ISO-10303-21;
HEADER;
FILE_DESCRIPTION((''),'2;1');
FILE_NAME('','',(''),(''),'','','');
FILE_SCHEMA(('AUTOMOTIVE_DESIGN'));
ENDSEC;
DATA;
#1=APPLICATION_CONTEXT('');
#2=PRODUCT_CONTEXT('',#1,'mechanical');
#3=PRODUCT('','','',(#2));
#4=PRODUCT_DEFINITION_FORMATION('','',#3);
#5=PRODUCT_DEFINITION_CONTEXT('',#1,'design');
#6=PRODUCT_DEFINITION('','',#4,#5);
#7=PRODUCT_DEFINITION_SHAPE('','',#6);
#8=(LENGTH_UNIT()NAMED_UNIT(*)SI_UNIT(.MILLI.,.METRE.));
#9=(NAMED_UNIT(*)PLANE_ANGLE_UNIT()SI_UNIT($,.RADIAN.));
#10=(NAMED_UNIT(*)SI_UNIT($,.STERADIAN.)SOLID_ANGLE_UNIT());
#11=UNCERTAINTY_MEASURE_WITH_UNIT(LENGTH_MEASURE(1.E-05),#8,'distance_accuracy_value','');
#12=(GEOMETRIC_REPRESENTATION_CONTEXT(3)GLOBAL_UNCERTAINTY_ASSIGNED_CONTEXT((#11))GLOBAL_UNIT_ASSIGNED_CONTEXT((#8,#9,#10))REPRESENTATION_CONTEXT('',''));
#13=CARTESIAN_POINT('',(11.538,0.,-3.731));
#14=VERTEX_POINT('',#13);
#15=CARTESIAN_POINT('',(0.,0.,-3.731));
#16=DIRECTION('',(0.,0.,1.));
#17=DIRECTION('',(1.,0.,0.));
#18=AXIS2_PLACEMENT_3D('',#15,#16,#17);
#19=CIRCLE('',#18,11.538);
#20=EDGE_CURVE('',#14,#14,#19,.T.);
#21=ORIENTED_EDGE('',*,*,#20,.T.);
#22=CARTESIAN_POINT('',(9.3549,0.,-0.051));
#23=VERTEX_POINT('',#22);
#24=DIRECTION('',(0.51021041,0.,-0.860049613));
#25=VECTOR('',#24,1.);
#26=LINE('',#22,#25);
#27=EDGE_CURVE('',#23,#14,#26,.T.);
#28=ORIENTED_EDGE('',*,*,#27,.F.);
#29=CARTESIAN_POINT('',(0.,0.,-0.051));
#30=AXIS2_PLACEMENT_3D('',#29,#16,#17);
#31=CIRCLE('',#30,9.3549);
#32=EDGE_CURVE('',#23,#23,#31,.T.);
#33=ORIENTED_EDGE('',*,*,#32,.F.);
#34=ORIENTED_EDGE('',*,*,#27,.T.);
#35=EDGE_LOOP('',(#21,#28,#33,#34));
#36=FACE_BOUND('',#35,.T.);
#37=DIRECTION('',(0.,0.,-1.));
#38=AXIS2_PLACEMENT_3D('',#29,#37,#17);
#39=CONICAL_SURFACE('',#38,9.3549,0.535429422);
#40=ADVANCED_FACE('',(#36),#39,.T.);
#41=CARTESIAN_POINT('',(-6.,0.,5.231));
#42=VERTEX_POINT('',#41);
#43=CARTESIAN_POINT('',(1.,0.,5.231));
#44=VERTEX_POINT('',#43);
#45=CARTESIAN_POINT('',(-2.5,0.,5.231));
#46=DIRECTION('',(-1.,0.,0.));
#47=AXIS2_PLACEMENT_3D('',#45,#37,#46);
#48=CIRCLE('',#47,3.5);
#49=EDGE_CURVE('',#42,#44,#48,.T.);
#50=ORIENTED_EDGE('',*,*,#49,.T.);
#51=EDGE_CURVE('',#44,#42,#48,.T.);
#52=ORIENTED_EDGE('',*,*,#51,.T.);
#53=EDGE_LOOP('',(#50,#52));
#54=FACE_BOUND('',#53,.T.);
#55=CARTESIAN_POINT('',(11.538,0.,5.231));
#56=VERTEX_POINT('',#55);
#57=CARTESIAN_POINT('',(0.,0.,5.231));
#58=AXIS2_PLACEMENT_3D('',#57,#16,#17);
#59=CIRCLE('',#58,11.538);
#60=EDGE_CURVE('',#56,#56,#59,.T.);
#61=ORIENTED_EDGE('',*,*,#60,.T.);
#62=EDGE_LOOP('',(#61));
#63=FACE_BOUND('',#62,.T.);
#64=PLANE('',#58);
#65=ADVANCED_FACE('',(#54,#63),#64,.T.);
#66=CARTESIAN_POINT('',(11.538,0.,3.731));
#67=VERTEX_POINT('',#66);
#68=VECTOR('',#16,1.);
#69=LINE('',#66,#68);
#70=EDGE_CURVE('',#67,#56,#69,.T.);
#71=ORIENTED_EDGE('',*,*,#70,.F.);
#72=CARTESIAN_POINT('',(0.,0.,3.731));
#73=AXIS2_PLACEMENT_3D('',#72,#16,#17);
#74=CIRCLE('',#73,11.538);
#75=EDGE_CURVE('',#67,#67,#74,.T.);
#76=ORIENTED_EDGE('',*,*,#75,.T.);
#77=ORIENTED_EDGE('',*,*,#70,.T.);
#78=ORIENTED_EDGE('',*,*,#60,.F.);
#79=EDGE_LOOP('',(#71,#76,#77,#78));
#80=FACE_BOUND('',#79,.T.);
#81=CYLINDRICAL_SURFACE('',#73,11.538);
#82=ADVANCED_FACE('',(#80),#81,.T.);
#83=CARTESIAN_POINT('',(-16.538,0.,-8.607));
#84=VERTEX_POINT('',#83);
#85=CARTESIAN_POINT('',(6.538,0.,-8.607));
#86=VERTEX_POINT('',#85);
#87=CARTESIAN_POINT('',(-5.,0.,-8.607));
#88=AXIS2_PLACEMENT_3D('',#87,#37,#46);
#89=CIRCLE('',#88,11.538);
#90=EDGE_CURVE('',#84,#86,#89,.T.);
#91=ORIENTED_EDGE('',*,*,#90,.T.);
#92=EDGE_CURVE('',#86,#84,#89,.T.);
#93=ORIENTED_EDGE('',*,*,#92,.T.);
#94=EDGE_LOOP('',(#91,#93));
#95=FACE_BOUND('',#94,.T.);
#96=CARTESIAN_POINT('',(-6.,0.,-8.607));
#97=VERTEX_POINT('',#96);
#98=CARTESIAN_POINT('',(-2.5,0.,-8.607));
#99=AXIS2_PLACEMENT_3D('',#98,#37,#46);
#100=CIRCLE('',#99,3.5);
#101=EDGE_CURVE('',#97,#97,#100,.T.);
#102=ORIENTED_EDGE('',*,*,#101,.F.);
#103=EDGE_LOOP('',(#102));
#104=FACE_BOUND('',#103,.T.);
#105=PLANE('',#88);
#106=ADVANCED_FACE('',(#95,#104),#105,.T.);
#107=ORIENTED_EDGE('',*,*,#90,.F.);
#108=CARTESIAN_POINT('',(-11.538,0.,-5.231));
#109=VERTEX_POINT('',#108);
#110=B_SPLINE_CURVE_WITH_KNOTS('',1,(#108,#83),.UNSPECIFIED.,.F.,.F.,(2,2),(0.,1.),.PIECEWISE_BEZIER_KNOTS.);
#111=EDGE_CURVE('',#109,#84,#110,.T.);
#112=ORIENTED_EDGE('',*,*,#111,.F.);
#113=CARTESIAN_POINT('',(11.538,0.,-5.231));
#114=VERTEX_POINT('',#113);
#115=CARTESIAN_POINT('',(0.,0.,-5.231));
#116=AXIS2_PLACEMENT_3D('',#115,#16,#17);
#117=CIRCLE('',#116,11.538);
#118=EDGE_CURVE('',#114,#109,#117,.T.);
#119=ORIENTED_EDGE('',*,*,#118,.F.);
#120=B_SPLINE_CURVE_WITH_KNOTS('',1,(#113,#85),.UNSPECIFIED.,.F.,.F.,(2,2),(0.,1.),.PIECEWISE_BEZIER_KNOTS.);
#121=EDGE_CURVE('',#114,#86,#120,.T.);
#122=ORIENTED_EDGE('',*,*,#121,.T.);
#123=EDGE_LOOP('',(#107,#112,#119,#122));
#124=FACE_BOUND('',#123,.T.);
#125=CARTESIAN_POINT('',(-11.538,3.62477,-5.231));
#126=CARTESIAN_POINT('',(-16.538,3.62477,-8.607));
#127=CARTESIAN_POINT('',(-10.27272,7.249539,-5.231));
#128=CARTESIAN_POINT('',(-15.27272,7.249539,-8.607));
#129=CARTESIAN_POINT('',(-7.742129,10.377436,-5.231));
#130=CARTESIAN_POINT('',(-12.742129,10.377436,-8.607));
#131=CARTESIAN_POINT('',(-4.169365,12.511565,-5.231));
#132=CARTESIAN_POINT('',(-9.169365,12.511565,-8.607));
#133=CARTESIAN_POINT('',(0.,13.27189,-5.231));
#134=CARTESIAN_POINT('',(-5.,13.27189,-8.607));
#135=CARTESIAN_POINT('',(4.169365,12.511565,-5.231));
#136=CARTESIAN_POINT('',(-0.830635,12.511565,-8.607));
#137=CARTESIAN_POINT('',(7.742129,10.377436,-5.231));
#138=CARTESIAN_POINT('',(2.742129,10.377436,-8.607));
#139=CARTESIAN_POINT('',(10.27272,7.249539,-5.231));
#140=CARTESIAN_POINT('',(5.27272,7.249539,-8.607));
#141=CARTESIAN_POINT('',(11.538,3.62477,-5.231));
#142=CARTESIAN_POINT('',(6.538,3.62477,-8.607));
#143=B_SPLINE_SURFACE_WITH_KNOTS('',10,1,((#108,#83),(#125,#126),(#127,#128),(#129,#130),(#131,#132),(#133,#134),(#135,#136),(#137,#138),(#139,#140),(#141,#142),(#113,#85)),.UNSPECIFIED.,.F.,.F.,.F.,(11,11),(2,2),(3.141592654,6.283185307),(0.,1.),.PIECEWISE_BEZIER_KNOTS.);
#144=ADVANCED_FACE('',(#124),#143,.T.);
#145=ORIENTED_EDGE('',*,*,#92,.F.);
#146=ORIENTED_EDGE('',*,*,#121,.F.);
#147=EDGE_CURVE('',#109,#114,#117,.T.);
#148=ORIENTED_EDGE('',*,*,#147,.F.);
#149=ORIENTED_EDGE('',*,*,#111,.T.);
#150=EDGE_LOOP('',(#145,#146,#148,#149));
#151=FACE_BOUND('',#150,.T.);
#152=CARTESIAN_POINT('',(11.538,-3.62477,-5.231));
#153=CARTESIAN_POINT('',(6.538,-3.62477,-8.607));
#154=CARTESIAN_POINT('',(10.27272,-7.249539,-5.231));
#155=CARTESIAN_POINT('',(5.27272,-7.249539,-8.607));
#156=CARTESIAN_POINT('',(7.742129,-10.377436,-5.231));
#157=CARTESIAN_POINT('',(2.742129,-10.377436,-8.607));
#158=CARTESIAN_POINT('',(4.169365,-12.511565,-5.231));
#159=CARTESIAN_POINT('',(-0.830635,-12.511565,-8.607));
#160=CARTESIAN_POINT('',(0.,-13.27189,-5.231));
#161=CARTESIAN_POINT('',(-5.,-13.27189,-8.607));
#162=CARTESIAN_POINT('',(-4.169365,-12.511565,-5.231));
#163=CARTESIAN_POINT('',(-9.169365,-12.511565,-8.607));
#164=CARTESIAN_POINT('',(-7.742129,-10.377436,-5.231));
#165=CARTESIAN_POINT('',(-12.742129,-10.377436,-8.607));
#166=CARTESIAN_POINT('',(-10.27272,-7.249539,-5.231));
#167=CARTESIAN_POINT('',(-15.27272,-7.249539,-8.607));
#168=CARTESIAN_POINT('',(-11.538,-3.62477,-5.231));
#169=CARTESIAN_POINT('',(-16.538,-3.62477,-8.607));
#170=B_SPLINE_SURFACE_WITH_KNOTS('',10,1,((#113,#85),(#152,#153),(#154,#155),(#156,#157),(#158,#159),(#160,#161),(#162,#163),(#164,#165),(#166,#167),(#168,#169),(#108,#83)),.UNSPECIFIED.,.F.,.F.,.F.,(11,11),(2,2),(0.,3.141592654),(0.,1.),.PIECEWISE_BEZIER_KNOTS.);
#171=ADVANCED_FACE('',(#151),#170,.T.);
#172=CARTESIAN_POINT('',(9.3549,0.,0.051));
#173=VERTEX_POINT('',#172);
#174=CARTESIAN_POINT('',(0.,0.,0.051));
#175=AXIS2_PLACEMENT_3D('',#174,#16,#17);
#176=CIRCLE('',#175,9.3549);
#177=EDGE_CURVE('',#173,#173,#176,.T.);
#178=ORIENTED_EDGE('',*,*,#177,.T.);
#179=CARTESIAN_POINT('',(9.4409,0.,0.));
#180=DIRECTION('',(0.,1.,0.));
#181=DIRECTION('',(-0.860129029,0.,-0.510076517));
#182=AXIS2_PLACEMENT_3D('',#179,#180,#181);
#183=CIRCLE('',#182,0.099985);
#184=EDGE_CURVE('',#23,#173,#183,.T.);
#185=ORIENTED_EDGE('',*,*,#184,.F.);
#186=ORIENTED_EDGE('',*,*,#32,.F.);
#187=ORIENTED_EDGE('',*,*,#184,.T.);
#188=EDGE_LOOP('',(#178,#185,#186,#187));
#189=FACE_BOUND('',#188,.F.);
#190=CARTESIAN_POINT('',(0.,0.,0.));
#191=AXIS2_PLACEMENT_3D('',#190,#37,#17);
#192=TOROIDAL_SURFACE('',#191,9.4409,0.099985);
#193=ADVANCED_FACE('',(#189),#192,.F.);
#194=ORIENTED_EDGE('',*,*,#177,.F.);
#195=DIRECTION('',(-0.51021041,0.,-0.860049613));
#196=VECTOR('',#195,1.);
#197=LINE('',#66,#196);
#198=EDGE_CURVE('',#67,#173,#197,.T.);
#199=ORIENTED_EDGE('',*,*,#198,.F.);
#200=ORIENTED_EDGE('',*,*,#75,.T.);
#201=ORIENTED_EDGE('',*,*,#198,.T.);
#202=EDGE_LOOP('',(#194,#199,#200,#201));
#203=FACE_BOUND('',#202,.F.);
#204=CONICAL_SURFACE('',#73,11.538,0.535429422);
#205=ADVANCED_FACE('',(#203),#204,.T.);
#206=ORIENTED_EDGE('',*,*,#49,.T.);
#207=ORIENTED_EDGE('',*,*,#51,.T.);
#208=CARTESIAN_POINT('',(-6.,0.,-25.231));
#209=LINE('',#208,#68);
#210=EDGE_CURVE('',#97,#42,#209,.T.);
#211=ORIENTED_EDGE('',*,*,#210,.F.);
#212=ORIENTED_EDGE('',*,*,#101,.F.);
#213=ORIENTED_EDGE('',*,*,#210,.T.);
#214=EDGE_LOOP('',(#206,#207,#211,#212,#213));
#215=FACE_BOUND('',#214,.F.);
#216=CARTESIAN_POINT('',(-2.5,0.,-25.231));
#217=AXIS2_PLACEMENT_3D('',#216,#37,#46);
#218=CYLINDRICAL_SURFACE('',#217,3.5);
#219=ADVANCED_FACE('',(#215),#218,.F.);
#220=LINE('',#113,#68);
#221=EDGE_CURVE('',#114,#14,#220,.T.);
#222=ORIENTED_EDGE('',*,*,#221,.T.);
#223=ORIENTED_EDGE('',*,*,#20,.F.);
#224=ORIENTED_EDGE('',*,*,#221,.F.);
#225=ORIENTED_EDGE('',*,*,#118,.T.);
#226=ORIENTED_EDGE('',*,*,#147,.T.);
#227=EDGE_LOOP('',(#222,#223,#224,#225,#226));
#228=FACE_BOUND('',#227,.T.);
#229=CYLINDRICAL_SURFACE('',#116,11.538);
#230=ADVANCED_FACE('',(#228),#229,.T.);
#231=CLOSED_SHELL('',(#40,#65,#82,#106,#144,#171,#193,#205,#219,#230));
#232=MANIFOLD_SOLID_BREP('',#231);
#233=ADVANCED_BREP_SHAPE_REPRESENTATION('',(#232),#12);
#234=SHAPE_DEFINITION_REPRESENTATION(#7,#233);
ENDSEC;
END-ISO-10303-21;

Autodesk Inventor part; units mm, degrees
ref_plane "XZ Plane" through (0, 0, 0) normal (0, 1, 0) x (-1, 0, 0)
sketch "Sketch7" plane through (0, 0, 0) normal (0, 1, 0) x (-1, 0, 0)
  line L0 (0, 0) -> (0, 15.7673)
  line L1 (0, 0) -> (-13.3368, 0) construction
  line L2 (0, 15.7673) -> (-13.3368, 0) construction
  line L3 (0, 15.7673) -> (-18.6413, 0) construction
  line L4 (0, 15.7673) -> (-12.4569, -5.231) construction
  line L5 (0, 0) -> (0, -15.7673)
  line L6 (0, -15.7673) -> (-13.3368, 0) construction
  line L7 (0, -15.7673) -> (-18.6413, 0) construction
  line L8 (0, -15.7673) -> (-12.4569, 5.231) construction
  line L9 (-12.4569, 5.231) -> (-18.6413, 0) construction
  line L10 (-9.3537, 0) -> (-18.5948, -7.8164) construction
  line L11 (-9.3537, 0) -> (-18.0926, 7.3915) construction
  line L12 (0, -29.7093) -> (0, 66.7435) projected
  line L13 (-53.5, -5.9919) -> (-53.5, 6.008)
  line L14 (17.5786, 0) -> (-94.9714, 0) projected
  line L15 (-15.989, 2.2434) -> (-10.6846, -2.2434) construction
  line L16 (-10.6846, 2.2434) -> (-15.989, -2.2434) construction
  line L17 (-26.151, -15.9303) -> (-40.3783, -15.9303) construction
  line L18 (-40.3783, -15.9303) -> (-40.3783, -12.7539) construction
  line L19 (-40.3783, -12.7539) -> (-26.151, -12.7539) construction
  line L20 (-26.151, -12.7539) -> (-26.151, -15.9303) construction
  point P0 (-53.5, 0)
  dimension "Roller_Side_difference" = -0.0003
  dimension "d90" = 15.7673
  dimension "d201" = 53.5
  dimension "d343" = 99.548
  dimension "d344" = 99.549
  dimension "d367" = 8.1
sketch "Roller1" plane through (0, 0, 0) normal (0, 1, 0) x (-1, 0, 0)
  line L0 (0, 15.7673) -> (-12.4569, -5.231) construction
  line L1 (0, 15.7673) -> (-18.6413, 0) construction
  line L2 (-9.3537, 0) -> (-18.0926, 7.3915) construction
  line L3 (0, -15.7673) -> (-18.6413, 0) construction
  line L4 (-9.4248, -0.0708) -> (-12.4245, -5.1274)
  line L5 (-12.4245, -5.1274) -> (-18.5445, 0.0491)
  line L6 (-18.5445, 0.0491) -> (-14.0556, 3.846)
  line L7 (-14.0556, 3.846) -> (-9.4248, -0.0708)
  line L8 (-11.7456, 1.8921) -> (-15.4898, -2.5346)
  line L9 (-10.9821, 1.2463) -> (-14.7263, -3.1804)
  point P0 (0, 0)
  point P1 (-15.4845, -2.5391)
  dimension "d345" = 0.025
  dimension "d346" = 0.025
  dimension "d347" = 0.1
  dimension "d348" = 0.1
  dimension "d349" = 99.549
  dimension "d350" = 99.548
  dimension "d357" = 1
  dimension "d369" = 4.0148
sketch "Sketch1" plane through (0, 0, 0) normal (0, 0, 1) x (1, 0, 0)
  circle A0 centre (0, 0) radius 13.3368 construction
  line L0 (0, 0) -> (13.3368, 0)
  line L1 (0, 0) -> (13.3368, 4.025)
  line L2 (13.3368, 0) -> (13.3368, 4.025)
  circle A1 centre (0, 0) radius 53.5
  dimension "d56" = 13.3368
  dimension "d57" = 4.025
  dimension "d400" = 53.5
  dimension "d495" = 2.5
  dimension "d496" = 8
  dimension "d531" = 5.5
  dimension "d532" = 5.5
  dimension "d533" = 5.5
  dimension "d537" = 24.5
  dimension "d538" = 3
  dimension "d543" = 5.5
  dimension "d549" = 3
  dimension "d550" = 3
  dimension "d567" = 5.5
  dimension "d568" = 5.5
sketch "Roller2" plane through (0, 0, 0) normal (0, 1, 0) x (-1, 0, 0)
  line L0 (0, -15.7673) -> (-12.4569, 5.231) construction
  line L1 (-9.3537, 0) -> (-18.5948, -7.8164) construction
  line L2 (0, -15.7673) -> (-18.6413, 0) construction
  line L3 (0, 15.7673) -> (-18.6413, 0) construction
  line L4 (-12.4633, 5.1928) -> (-9.386, 0.0054)
  line L5 (-9.386, 0.0054) -> (-13.9975, -3.8951)
  line L6 (-13.9975, -3.8951) -> (-18.6026, 0)
  line L7 (-18.6026, 0) -> (-12.4633, 5.1928)
  line L8 (-15.533, 2.5964) -> (-11.6918, -1.9449)
  line L9 (-14.7694, 3.2422) -> (-10.9283, -1.2991)
  point P0 (0, 0)
  dimension "d351" = 0.025
  dimension "d352" = 0.025
  dimension "d354" = 0.025
  dimension "d355" = 99.548
  dimension "d356" = 99.549
  dimension "d370" = 0.025
  dimension "d371" = 1
sketch "Sketch22" plane through (0, 0, 0) normal (0, 1, 0) x (-1, 0, 0)
  line L0 (-31.756, 8.0215) -> (-17.5287, 8.0215) construction
  line L1 (-17.5287, 8.0215) -> (-17.5287, 4.8451) construction
  line L2 (-17.5287, 4.8451) -> (-31.756, 4.8451) construction
  line L3 (-31.756, 4.8451) -> (-31.756, 8.0215) construction
  point P0 (0, 0)
  dimension "Roller_Side_difference" = -0.0003
sketch "Sketch2" plane through (0, 0, 0) normal (0, 1, 0) x (-1, 0, 0)
  line L0 (0, 0) -> (0, 13.3368) construction
  line L1 (0, 0) -> (-13.3368, 0) projected
  line L2 (0, 0) -> (0, -13.3368)
  line L3 (0, -13.3368) -> (-13.3368, 0) construction
  line L4 (0, 13.3368) -> (-13.3368, 0) construction
  line L5 (-78.8928, 52.9645) -> (0, 13.3368) construction
  line L6 (-34.8011, 15.91) -> (0, 13.3368) construction
  line L7 (-34.8011, 15.91) -> (0, -13.3368) construction
  line L8 (-48.3339, 16.9106) -> (0, -13.3368) construction
  point P0 (-17.4708, -4.134)
sketch "Sketch23" plane through (0, 0, 0) normal (0, 1, 0) x (-1, 0, 0)
  line L0 (0, -15.7673) -> (-12.4569, 5.231) construction
  line L1 (0, -15.7673) -> (-18.6413, 0) construction
  line L2 (0, 15.7673) -> (-12.4569, -5.231) construction
  line L3 (-12.4569, 5.231) -> (-18.6413, 0) construction
  line L4 (0, 15.7673) -> (-18.6413, 0) construction
  line L5 (-12.4569, 5.231) -> (-12.4569, -5.231) construction
  line L6 (17.5786, 0) -> (-94.9714, 0) projected
  line L7 (-11.538, 3.731) -> (-9.3549, 0.051)
  line L8 (-9.3549, -0.051) -> (-11.538, -3.731)
  line L9 (-14.269, 3.731) -> (-18.5898, 0.0764)
  line L10 (-18.5898, -0.0764) -> (-14.269, -3.731)
  arc A0 (-18.5898, 0.0764) -> (-18.5898, -0.0764) centre (-18.5252, 0) ccw
  arc A1 (-9.3549, -0.051) -> (-9.3549, 0.051) centre (-9.4409, 0) ccw
  line L11 (-11.538, 3.731) -> (-11.538, 5.231)
  line L12 (-11.538, 5.231) -> (-1, 5.231)
  line L13 (-1, 5.231) -> (-1, -5.231)
  line L14 (-1, -5.231) -> (-11.538, -5.231)
  line L15 (-11.538, -5.231) -> (-11.538, -3.731)
  line L16 (-14.269, 3.731) -> (-14.269, 5.231)
  line L17 (-14.269, 5.231) -> (-53.5, 5.231)
  line L18 (-53.5, 5.231) -> (-53.5, -5.231)
  line L19 (-14.269, -3.731) -> (-14.269, -5.231)
  line L20 (-14.269, -5.231) -> (-53.5, -5.231)
  line L21 (-12.4569, 5.231) -> (-12.4569, 5.231)
  line L22 (-12.4569, -5.231) -> (-12.4569, -5.231)
  line L23 (0, -29.7093) -> (0, 66.7435) projected
  line L24 (-18.68, 0) -> (-53.5, 0)
  point P0 (0, 0)
  point P1 (-9.3246, 0)
  point P2 (-18.6252, 0)
  point P3 (-53.5, 0)
  dimension "d378" = 90
  dimension "d379" = 0.1
  dimension "d380" = 0.025
  dimension "d381" = 0.025
  dimension "d382" = 0.025
  dimension "d383" = 0.025
  dimension "d384" = 10.4619
  dimension "d385" = 0
  dimension "d386" = 0
  dimension "d391" = 1
  dimension "d392" = 53.5
  dimension "d393" = 1.5
  dimension "d394" = 1.5
  dimension "d395" = 1.5
  dimension "d396" = 1.5
revolve "RevRoller1" [suppressed]
fillet "Fillet1" [suppressed]
pattern_circular "Circular Pattern13" [suppressed]
feature "Move Body7" [suppressed]
revolve "Revolution13" [suppressed]
fillet "Fillet3" [suppressed]
pattern_circular "Circular Pattern14" [suppressed]
feature "Move Body6" [suppressed]
revolve "Revolution14" add sketch "Sketch23" angle 360 about axis through (0, 0, -10) along (0, 0, 1) contours L13 L14 L15 L8 A1 L6 | L6 A1 L7 L11 L12 L13
ref_plane "Work Plane7" through (0, 0, -25.231) normal (0, 0, -1) x (-1, 0, 0)
sketch "Sketch44" plane through (0, 0, -25.231) normal (0, 0, -1) x (-1, 0, 0)
  circle A0 centre (5, 0) radius 11.538
  line L0 (5, 0) -> (2.5, 0)
  circle A1 centre (2.5, 0) radius 3.5
  point P0 (0, 0)
  dimension "d621" = 2.5
  dimension "d622" = 7
ref_plane "Work Plane8" through (0, 0, -8.607) normal (0, 0, -1) x (-1, 0, 0)
sketch "Sketch45" plane through (0, 0, -8.607) normal (0, 0, -1) x (-1, 0, 0)
  circle A0 centre (5, 0) radius 11.538 projected
  point P0 (0, 0)
loft "Loft1" add profiles "Sketch45" section 1 edges at (-11.538, 0, -5.231)
sketch "Sketch46" plane through (0, 0, 5.231) normal (0, 0, 1) x (1, 0, 0)
  point P0 (0, 0)
extrude "Extrusion39" cut sketch "Sketch44" against normal through all contours A1
ref_plane "Work Plane9" through (50, 0, 0) normal (1, 0, 0) x (0, 1, 0)
sketch "Sketch47" plane through (50, 0, 0) normal (1, 0, 0) x (0, 1, 0)
  line L0 (9.3549, 0.051) -> (-9.3549, 0.051) construction
  circle A0 centre (0, 0) radius 2.75
  circle A1 centre (0, 0) radius 1.5
  line L1 (-1.5877, -2.75) -> (-3.1754, 0)
  line L2 (-3.1754, 0) -> (-1.5877, 2.75)
  line L3 (-1.5877, 2.75) -> (1.5877, 2.75)
  line L4 (1.5877, 2.75) -> (3.1754, 0)
  line L5 (3.1754, 0) -> (1.5877, -2.75)
  line L6 (1.5877, -2.75) -> (-1.5877, -2.75)
  dimension "d626" = 5.5
  dimension "d627" = 3
  dimension "d628" = 5.5
extrude "Extrusion40" [suppressed]
extrude "Extrusion41" [suppressed]
extrude "Extrusion42" [suppressed]
sketch "Sketch40" plane through (0, 0, -5.231) normal (0, 0, -1) x (-1, 0, 0)
  circle A0 centre (53.5, 0) radius 2.75 projected
  circle A1 centre (0, 0) radius 53.5 projected
  point P0 (53.4293, 2.7491)
  point P1 (53.4293, -2.7491)
  dimension "d585" = 8
  dimension "d587" = 1.75
  dimension "d589" = 3
  dimension "d592" = 2
  dimension "d593" = 12
  dimension "d594" = 12
  dimension "d611" = 360
equation "\"Roller_Side_difference\" = -0.001568deg"
equation "\"Cycloid_Top_Plate_Fasner_Inner\" = 61.25"
equation "\"Cycloid_Top_Plate_Fasner_Outer\" = 85.75"
equation "\"Roller_Hole_Radius\" = 1"
equation "\"Distance_To_Bearing\" = 20.65135"
equation "\"d514\" = 0.2"
properties part number "Axle_Printing_TestsRotor_TSB"
